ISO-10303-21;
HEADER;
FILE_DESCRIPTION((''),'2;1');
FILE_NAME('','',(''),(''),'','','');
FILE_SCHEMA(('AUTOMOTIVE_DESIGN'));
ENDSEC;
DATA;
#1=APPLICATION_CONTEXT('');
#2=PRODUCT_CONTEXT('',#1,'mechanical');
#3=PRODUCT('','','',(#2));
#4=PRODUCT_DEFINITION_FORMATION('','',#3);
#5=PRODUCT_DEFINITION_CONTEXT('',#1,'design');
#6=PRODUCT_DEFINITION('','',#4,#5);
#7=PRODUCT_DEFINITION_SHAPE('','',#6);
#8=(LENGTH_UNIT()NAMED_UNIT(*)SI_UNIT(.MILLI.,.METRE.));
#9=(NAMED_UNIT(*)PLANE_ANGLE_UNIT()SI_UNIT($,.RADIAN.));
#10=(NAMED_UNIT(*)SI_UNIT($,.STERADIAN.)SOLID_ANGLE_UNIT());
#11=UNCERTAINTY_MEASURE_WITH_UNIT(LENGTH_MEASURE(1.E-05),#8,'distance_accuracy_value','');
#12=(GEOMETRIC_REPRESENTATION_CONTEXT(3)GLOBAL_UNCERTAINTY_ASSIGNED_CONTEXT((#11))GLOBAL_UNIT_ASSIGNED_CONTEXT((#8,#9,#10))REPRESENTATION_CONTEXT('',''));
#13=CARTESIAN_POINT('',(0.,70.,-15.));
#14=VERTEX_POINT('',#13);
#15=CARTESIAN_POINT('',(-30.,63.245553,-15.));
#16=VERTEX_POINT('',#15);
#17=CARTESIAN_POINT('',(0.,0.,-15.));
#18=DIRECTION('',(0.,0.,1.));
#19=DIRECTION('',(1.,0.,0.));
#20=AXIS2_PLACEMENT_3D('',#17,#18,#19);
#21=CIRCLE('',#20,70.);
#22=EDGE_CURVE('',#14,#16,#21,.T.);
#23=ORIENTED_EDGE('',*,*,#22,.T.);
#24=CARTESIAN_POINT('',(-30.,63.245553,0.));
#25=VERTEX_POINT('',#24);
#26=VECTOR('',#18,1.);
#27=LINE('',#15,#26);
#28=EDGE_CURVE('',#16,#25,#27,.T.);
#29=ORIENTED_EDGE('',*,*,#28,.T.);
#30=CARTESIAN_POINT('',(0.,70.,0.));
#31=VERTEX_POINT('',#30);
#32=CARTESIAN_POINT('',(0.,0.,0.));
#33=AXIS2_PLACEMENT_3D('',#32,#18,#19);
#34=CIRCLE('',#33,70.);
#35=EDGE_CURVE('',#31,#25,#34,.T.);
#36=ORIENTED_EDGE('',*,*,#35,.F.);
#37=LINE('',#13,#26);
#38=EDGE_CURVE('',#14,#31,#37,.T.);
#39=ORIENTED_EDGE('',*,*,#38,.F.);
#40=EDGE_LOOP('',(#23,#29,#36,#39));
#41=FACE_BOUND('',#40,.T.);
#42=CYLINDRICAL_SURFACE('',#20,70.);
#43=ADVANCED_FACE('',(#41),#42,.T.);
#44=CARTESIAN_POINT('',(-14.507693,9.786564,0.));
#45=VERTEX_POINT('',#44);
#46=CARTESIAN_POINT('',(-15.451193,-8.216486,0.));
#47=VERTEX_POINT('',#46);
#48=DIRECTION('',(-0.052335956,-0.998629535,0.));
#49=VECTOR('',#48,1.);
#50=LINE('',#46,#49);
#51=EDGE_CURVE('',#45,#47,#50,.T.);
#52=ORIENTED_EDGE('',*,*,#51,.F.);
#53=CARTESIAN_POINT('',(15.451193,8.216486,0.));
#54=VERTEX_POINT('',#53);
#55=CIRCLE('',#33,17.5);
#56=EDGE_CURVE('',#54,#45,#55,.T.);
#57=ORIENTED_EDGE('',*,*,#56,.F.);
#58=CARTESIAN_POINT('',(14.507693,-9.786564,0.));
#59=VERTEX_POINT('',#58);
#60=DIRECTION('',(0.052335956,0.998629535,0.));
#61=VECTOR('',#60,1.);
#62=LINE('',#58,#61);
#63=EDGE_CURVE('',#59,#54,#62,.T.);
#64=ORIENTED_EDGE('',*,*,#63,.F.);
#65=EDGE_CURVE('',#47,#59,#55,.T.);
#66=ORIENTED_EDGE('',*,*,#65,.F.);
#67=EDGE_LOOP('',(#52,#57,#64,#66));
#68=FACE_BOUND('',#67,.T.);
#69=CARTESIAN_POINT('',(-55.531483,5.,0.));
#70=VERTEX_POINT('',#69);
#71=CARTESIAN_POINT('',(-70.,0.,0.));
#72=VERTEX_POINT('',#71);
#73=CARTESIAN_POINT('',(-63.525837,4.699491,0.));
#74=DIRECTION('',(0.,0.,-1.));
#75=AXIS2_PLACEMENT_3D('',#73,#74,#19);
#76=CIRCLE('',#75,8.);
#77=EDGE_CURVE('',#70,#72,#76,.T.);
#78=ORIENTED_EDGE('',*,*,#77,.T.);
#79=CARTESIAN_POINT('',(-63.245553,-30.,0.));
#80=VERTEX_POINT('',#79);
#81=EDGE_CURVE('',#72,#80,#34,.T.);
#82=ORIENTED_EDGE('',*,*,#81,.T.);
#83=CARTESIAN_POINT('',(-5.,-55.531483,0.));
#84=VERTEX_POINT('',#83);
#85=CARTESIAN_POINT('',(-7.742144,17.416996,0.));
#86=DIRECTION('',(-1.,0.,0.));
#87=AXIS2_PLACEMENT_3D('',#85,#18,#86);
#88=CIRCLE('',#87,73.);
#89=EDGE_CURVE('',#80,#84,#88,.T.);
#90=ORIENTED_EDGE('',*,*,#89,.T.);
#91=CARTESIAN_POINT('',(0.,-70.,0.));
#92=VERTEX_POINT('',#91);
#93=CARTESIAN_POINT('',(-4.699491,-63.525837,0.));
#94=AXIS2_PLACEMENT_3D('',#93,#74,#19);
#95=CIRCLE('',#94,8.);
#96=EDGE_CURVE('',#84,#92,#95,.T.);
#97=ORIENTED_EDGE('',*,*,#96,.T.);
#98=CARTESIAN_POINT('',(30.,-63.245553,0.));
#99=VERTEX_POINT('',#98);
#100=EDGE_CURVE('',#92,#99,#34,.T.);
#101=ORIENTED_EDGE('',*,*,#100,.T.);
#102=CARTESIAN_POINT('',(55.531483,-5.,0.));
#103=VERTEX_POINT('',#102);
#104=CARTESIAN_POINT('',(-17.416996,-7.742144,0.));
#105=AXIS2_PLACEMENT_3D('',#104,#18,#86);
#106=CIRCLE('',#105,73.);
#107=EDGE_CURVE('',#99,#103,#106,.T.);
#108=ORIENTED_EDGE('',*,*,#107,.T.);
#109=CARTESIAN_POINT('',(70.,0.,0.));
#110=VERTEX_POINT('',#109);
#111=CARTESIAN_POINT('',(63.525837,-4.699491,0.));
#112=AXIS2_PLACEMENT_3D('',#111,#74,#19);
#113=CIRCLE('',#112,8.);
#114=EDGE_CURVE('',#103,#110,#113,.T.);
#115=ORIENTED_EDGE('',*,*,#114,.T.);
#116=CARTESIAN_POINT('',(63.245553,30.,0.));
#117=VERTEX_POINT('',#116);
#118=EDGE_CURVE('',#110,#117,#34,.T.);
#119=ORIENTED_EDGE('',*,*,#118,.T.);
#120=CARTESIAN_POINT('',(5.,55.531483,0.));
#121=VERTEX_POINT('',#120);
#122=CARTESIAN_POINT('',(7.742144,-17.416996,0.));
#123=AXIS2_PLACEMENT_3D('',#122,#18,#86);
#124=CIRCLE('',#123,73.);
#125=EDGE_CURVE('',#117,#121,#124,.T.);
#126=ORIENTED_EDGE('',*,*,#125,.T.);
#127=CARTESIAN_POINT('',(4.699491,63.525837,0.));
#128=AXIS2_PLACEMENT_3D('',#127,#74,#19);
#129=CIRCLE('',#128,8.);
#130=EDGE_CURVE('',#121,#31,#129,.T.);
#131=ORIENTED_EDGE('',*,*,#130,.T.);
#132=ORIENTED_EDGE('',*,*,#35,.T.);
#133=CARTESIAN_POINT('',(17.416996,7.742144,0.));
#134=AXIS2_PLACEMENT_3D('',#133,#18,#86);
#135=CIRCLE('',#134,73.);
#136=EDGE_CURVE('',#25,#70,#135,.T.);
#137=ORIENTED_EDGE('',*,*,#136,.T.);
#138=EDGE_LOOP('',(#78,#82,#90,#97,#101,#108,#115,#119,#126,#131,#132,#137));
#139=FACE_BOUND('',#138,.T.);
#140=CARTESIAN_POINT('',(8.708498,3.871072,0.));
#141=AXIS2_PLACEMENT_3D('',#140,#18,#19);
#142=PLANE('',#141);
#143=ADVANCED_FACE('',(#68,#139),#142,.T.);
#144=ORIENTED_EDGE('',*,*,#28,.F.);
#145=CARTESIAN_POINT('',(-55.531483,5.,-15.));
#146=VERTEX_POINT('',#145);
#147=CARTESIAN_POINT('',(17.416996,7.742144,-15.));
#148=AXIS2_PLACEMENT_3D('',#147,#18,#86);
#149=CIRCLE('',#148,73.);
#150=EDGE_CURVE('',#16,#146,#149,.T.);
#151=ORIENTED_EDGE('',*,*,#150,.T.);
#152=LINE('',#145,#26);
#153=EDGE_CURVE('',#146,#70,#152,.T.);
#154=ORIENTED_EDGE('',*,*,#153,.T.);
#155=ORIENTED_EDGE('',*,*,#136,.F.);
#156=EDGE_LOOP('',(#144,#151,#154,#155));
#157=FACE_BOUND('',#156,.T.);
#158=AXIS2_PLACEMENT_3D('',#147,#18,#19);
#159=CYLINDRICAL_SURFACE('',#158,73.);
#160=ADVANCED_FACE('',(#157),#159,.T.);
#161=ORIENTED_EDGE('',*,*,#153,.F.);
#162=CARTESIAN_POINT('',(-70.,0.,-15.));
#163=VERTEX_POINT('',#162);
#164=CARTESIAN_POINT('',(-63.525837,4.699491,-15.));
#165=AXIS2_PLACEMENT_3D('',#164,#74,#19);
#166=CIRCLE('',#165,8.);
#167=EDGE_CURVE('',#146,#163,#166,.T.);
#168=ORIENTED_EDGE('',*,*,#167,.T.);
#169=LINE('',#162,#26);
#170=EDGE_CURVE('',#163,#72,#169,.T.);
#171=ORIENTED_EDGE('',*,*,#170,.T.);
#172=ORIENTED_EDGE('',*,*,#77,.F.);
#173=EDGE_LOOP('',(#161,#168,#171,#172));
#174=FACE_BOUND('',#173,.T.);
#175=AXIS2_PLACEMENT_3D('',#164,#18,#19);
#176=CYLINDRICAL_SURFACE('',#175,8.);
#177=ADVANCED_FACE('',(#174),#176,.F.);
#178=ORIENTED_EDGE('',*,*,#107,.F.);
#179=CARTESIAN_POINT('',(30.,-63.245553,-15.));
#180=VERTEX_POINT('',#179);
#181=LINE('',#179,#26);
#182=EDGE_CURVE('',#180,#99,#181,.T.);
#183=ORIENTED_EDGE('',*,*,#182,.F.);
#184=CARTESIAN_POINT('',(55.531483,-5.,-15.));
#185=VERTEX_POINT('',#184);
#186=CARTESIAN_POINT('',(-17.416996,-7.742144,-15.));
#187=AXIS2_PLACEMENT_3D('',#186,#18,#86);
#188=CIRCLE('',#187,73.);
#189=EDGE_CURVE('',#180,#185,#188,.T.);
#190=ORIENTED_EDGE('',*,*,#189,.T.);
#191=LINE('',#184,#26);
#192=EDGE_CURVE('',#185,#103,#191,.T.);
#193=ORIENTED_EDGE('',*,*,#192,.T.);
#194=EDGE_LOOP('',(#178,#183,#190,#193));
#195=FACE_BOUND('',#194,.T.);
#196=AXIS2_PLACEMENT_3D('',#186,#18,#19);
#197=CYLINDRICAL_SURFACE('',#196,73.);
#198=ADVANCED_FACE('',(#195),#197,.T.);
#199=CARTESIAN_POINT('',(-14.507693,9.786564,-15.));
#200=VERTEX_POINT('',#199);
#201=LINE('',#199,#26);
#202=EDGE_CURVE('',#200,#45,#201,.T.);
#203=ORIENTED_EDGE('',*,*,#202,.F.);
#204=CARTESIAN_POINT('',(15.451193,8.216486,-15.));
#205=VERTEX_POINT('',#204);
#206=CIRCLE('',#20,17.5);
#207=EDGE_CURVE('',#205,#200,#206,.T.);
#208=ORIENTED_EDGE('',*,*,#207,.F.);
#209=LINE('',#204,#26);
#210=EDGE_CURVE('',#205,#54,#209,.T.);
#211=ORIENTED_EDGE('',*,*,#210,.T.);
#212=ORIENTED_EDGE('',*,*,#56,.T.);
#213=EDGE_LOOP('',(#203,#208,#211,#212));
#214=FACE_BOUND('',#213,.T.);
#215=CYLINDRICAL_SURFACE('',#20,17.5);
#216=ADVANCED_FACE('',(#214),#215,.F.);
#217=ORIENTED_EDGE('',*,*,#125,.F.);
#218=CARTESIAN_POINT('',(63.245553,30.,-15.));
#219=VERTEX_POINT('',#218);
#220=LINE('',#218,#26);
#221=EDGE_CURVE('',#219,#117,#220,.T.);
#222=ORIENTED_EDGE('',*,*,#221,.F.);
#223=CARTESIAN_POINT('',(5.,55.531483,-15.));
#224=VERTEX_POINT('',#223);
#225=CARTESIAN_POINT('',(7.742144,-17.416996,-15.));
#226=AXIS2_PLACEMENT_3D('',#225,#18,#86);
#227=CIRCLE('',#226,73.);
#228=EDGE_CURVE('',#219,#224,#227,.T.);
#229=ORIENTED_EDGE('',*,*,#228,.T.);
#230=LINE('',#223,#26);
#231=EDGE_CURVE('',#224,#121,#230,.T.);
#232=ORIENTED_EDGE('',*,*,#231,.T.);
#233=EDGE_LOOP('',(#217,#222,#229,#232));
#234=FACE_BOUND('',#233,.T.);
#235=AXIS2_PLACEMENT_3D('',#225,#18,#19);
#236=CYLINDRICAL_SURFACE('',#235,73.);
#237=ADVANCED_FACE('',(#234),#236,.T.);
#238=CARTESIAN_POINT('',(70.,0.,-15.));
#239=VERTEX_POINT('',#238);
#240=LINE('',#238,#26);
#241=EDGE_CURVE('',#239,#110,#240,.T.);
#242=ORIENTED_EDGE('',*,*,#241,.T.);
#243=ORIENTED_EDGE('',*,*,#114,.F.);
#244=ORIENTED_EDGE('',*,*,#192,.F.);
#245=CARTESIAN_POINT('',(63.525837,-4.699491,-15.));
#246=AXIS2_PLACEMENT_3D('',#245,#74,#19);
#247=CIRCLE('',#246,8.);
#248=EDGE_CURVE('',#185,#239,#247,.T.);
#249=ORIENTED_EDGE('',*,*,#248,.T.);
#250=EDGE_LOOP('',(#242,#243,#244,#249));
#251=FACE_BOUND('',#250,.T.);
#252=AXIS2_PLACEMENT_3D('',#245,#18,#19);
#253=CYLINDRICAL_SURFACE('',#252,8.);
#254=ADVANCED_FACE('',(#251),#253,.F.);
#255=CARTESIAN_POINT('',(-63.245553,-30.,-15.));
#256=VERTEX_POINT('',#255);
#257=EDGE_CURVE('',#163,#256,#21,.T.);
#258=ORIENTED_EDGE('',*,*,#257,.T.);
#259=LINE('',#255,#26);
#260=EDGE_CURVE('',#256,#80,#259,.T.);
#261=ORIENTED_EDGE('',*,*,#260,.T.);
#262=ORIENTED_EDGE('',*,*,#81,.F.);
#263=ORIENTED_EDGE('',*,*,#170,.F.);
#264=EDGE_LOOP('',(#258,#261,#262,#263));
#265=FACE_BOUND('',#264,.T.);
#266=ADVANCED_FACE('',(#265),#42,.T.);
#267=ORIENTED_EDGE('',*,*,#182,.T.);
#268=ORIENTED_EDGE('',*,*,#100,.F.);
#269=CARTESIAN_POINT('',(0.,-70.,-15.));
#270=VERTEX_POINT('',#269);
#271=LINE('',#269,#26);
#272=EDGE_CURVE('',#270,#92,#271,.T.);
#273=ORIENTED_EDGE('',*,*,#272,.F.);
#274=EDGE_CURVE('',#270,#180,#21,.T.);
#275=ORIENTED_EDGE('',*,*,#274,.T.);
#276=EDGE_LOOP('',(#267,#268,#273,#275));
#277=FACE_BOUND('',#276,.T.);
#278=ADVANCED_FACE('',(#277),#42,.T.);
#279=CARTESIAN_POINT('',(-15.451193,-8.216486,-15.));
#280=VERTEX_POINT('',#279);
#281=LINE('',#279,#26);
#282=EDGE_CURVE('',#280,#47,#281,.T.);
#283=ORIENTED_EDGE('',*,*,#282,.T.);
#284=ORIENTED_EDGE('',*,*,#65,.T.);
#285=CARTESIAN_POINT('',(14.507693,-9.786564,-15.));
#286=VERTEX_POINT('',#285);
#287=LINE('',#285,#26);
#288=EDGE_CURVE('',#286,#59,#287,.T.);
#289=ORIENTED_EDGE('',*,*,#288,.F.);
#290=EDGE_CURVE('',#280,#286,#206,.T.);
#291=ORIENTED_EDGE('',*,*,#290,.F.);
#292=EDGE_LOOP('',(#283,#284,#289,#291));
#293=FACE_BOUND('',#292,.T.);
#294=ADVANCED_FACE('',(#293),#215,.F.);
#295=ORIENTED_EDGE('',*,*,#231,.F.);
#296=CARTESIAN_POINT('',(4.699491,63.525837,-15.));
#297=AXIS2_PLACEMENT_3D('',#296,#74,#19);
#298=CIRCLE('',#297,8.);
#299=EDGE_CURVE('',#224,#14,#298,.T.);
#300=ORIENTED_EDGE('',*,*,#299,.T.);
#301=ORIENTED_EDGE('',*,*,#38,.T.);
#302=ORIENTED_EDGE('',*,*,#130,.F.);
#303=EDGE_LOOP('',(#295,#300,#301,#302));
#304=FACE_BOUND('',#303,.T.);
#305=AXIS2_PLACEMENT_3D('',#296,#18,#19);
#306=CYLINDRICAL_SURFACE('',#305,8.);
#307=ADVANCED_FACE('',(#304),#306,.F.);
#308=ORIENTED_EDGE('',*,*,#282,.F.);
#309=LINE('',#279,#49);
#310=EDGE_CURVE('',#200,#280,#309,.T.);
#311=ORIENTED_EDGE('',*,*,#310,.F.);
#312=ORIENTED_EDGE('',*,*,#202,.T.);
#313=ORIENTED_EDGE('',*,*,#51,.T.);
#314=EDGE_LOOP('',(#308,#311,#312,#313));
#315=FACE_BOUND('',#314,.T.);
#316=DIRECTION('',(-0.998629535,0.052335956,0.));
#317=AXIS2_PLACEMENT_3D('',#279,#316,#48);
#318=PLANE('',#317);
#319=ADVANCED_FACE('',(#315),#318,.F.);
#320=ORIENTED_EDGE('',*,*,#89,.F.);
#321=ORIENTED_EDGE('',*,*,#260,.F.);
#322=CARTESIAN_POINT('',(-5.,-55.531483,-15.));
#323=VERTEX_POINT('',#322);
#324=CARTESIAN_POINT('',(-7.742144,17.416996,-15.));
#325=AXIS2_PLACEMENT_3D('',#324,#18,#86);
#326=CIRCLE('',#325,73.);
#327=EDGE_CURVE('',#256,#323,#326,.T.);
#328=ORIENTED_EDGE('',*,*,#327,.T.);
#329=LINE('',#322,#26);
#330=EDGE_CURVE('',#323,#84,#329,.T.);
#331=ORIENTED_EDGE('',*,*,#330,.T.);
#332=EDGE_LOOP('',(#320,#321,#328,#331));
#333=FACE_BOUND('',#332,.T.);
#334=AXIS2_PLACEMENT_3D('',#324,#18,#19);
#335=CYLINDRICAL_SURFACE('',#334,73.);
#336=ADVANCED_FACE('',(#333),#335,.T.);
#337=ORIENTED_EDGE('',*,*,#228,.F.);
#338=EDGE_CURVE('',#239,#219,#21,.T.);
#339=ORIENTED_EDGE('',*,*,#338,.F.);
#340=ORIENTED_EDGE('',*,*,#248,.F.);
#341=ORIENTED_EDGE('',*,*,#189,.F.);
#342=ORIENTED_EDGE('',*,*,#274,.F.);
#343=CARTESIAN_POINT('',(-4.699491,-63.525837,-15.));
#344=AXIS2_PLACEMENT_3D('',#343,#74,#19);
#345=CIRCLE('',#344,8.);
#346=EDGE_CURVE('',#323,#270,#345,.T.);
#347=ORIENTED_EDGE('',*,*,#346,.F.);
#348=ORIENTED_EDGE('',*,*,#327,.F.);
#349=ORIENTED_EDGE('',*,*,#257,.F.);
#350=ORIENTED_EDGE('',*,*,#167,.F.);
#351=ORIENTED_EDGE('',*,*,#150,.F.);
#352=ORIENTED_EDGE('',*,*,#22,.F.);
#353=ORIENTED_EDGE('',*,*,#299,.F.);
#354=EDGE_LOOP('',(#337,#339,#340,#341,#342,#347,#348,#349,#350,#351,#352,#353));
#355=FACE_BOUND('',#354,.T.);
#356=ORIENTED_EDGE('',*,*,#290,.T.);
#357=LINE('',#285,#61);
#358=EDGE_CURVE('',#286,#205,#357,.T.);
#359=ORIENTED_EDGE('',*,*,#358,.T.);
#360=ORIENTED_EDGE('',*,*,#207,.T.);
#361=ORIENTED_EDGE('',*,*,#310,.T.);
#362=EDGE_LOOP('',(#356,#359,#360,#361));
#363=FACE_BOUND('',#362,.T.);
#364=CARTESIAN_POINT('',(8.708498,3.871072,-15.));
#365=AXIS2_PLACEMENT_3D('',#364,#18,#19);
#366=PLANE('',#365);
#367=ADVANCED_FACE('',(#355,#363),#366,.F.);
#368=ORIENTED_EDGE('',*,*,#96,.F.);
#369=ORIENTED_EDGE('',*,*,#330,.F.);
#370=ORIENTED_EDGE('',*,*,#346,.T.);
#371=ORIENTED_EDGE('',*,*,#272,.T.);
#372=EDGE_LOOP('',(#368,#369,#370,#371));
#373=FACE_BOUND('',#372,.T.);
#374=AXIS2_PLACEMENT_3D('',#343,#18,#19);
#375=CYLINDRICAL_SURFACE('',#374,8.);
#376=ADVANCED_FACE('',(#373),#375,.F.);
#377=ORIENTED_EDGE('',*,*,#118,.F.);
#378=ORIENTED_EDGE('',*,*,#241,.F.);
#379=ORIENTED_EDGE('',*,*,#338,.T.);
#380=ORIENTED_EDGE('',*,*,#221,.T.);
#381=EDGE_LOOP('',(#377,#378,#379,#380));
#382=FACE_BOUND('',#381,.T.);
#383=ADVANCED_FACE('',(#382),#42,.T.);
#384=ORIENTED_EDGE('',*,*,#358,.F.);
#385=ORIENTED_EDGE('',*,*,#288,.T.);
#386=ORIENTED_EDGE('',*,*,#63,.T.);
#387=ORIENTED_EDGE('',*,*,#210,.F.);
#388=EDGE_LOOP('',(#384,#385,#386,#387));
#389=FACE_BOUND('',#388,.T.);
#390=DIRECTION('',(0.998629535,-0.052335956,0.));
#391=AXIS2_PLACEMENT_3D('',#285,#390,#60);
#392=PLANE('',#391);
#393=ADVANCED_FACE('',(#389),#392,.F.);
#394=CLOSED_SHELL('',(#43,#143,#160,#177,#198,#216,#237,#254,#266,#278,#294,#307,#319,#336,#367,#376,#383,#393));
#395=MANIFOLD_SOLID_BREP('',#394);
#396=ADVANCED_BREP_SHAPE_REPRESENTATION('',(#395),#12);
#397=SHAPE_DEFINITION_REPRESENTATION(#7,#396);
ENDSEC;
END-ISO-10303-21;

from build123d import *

# Parameters (mm, degrees)
TABAN_FLAN_1_DEPTH    = 15
KES_EKSTR_ZYON1_DEPTH = 101.124921973


# Sheet-metal steps are written as plain solids
with BuildPart() as part:
    # Çizim1 → Taban-Flanş1 (new body)
    with BuildSketch(Plane.XY):
        with BuildLine():
            ThreePointArc((-70, 0), (-68.290514437, -15.375488216), (-63.245553203, -30))
            ThreePointArc((-63.245553203, -30), (-37.049172752, -49.441795719), (-5, -55.531483348))
            ThreePointArc((-5, -55.531483348), (2.861742557, -60.912841793), (0, -70))
            ThreePointArc((0, -70), (15.375488216, -68.290514437), (30, -63.245553203))
            ThreePointArc((30, -63.245553203), (49.441795719, -37.049172752), (55.531483348, -5))
            ThreePointArc((55.531483348, -5), (60.912841793, 2.861742557), (70, 0))
            ThreePointArc((70, 0), (68.290514437, 15.375488216), (63.245553203, 30))
            ThreePointArc((63.245553203, 30), (37.049172752, 49.441795719), (5, 55.531483348))
            ThreePointArc((5, 55.531483348), (-2.861742557, 60.912841793), (0, 70))
            ThreePointArc((0, 70), (-15.375488216, 68.290514437), (-30, 63.245553203))
            ThreePointArc((-30, 63.245553203), (-49.441795719, 37.049172752), (-55.531483348, 5))
            ThreePointArc((-55.531483348, 5), (-60.912841793, -2.861742557), (-70, 0))
        make_face()
    extrude(amount=-TABAN_FLAN_1_DEPTH)

    # Çizim8 → Kes-Ekstrüzyon1 (cut, through all)
    with BuildSketch(Plane.XY):
        with BuildLine():
            Line((-15.451192956, -8.216485638), (-14.507693087, 9.786564326))
            ThreePointArc((-14.507693087, 9.786564326), (0.915879234, 17.476016858), (15.451192956, 8.216485638))
            Line((15.451192956, 8.216485638), (14.507693087, -9.786564326))
            ThreePointArc((14.507693087, -9.786564326), (-0.915879234, -17.476016858), (-15.451192956, -8.216485638))
        make_face()
    extrude(amount=-KES_EKSTR_ZYON1_DEPTH, mode=Mode.SUBTRACT)


solid = part.part
